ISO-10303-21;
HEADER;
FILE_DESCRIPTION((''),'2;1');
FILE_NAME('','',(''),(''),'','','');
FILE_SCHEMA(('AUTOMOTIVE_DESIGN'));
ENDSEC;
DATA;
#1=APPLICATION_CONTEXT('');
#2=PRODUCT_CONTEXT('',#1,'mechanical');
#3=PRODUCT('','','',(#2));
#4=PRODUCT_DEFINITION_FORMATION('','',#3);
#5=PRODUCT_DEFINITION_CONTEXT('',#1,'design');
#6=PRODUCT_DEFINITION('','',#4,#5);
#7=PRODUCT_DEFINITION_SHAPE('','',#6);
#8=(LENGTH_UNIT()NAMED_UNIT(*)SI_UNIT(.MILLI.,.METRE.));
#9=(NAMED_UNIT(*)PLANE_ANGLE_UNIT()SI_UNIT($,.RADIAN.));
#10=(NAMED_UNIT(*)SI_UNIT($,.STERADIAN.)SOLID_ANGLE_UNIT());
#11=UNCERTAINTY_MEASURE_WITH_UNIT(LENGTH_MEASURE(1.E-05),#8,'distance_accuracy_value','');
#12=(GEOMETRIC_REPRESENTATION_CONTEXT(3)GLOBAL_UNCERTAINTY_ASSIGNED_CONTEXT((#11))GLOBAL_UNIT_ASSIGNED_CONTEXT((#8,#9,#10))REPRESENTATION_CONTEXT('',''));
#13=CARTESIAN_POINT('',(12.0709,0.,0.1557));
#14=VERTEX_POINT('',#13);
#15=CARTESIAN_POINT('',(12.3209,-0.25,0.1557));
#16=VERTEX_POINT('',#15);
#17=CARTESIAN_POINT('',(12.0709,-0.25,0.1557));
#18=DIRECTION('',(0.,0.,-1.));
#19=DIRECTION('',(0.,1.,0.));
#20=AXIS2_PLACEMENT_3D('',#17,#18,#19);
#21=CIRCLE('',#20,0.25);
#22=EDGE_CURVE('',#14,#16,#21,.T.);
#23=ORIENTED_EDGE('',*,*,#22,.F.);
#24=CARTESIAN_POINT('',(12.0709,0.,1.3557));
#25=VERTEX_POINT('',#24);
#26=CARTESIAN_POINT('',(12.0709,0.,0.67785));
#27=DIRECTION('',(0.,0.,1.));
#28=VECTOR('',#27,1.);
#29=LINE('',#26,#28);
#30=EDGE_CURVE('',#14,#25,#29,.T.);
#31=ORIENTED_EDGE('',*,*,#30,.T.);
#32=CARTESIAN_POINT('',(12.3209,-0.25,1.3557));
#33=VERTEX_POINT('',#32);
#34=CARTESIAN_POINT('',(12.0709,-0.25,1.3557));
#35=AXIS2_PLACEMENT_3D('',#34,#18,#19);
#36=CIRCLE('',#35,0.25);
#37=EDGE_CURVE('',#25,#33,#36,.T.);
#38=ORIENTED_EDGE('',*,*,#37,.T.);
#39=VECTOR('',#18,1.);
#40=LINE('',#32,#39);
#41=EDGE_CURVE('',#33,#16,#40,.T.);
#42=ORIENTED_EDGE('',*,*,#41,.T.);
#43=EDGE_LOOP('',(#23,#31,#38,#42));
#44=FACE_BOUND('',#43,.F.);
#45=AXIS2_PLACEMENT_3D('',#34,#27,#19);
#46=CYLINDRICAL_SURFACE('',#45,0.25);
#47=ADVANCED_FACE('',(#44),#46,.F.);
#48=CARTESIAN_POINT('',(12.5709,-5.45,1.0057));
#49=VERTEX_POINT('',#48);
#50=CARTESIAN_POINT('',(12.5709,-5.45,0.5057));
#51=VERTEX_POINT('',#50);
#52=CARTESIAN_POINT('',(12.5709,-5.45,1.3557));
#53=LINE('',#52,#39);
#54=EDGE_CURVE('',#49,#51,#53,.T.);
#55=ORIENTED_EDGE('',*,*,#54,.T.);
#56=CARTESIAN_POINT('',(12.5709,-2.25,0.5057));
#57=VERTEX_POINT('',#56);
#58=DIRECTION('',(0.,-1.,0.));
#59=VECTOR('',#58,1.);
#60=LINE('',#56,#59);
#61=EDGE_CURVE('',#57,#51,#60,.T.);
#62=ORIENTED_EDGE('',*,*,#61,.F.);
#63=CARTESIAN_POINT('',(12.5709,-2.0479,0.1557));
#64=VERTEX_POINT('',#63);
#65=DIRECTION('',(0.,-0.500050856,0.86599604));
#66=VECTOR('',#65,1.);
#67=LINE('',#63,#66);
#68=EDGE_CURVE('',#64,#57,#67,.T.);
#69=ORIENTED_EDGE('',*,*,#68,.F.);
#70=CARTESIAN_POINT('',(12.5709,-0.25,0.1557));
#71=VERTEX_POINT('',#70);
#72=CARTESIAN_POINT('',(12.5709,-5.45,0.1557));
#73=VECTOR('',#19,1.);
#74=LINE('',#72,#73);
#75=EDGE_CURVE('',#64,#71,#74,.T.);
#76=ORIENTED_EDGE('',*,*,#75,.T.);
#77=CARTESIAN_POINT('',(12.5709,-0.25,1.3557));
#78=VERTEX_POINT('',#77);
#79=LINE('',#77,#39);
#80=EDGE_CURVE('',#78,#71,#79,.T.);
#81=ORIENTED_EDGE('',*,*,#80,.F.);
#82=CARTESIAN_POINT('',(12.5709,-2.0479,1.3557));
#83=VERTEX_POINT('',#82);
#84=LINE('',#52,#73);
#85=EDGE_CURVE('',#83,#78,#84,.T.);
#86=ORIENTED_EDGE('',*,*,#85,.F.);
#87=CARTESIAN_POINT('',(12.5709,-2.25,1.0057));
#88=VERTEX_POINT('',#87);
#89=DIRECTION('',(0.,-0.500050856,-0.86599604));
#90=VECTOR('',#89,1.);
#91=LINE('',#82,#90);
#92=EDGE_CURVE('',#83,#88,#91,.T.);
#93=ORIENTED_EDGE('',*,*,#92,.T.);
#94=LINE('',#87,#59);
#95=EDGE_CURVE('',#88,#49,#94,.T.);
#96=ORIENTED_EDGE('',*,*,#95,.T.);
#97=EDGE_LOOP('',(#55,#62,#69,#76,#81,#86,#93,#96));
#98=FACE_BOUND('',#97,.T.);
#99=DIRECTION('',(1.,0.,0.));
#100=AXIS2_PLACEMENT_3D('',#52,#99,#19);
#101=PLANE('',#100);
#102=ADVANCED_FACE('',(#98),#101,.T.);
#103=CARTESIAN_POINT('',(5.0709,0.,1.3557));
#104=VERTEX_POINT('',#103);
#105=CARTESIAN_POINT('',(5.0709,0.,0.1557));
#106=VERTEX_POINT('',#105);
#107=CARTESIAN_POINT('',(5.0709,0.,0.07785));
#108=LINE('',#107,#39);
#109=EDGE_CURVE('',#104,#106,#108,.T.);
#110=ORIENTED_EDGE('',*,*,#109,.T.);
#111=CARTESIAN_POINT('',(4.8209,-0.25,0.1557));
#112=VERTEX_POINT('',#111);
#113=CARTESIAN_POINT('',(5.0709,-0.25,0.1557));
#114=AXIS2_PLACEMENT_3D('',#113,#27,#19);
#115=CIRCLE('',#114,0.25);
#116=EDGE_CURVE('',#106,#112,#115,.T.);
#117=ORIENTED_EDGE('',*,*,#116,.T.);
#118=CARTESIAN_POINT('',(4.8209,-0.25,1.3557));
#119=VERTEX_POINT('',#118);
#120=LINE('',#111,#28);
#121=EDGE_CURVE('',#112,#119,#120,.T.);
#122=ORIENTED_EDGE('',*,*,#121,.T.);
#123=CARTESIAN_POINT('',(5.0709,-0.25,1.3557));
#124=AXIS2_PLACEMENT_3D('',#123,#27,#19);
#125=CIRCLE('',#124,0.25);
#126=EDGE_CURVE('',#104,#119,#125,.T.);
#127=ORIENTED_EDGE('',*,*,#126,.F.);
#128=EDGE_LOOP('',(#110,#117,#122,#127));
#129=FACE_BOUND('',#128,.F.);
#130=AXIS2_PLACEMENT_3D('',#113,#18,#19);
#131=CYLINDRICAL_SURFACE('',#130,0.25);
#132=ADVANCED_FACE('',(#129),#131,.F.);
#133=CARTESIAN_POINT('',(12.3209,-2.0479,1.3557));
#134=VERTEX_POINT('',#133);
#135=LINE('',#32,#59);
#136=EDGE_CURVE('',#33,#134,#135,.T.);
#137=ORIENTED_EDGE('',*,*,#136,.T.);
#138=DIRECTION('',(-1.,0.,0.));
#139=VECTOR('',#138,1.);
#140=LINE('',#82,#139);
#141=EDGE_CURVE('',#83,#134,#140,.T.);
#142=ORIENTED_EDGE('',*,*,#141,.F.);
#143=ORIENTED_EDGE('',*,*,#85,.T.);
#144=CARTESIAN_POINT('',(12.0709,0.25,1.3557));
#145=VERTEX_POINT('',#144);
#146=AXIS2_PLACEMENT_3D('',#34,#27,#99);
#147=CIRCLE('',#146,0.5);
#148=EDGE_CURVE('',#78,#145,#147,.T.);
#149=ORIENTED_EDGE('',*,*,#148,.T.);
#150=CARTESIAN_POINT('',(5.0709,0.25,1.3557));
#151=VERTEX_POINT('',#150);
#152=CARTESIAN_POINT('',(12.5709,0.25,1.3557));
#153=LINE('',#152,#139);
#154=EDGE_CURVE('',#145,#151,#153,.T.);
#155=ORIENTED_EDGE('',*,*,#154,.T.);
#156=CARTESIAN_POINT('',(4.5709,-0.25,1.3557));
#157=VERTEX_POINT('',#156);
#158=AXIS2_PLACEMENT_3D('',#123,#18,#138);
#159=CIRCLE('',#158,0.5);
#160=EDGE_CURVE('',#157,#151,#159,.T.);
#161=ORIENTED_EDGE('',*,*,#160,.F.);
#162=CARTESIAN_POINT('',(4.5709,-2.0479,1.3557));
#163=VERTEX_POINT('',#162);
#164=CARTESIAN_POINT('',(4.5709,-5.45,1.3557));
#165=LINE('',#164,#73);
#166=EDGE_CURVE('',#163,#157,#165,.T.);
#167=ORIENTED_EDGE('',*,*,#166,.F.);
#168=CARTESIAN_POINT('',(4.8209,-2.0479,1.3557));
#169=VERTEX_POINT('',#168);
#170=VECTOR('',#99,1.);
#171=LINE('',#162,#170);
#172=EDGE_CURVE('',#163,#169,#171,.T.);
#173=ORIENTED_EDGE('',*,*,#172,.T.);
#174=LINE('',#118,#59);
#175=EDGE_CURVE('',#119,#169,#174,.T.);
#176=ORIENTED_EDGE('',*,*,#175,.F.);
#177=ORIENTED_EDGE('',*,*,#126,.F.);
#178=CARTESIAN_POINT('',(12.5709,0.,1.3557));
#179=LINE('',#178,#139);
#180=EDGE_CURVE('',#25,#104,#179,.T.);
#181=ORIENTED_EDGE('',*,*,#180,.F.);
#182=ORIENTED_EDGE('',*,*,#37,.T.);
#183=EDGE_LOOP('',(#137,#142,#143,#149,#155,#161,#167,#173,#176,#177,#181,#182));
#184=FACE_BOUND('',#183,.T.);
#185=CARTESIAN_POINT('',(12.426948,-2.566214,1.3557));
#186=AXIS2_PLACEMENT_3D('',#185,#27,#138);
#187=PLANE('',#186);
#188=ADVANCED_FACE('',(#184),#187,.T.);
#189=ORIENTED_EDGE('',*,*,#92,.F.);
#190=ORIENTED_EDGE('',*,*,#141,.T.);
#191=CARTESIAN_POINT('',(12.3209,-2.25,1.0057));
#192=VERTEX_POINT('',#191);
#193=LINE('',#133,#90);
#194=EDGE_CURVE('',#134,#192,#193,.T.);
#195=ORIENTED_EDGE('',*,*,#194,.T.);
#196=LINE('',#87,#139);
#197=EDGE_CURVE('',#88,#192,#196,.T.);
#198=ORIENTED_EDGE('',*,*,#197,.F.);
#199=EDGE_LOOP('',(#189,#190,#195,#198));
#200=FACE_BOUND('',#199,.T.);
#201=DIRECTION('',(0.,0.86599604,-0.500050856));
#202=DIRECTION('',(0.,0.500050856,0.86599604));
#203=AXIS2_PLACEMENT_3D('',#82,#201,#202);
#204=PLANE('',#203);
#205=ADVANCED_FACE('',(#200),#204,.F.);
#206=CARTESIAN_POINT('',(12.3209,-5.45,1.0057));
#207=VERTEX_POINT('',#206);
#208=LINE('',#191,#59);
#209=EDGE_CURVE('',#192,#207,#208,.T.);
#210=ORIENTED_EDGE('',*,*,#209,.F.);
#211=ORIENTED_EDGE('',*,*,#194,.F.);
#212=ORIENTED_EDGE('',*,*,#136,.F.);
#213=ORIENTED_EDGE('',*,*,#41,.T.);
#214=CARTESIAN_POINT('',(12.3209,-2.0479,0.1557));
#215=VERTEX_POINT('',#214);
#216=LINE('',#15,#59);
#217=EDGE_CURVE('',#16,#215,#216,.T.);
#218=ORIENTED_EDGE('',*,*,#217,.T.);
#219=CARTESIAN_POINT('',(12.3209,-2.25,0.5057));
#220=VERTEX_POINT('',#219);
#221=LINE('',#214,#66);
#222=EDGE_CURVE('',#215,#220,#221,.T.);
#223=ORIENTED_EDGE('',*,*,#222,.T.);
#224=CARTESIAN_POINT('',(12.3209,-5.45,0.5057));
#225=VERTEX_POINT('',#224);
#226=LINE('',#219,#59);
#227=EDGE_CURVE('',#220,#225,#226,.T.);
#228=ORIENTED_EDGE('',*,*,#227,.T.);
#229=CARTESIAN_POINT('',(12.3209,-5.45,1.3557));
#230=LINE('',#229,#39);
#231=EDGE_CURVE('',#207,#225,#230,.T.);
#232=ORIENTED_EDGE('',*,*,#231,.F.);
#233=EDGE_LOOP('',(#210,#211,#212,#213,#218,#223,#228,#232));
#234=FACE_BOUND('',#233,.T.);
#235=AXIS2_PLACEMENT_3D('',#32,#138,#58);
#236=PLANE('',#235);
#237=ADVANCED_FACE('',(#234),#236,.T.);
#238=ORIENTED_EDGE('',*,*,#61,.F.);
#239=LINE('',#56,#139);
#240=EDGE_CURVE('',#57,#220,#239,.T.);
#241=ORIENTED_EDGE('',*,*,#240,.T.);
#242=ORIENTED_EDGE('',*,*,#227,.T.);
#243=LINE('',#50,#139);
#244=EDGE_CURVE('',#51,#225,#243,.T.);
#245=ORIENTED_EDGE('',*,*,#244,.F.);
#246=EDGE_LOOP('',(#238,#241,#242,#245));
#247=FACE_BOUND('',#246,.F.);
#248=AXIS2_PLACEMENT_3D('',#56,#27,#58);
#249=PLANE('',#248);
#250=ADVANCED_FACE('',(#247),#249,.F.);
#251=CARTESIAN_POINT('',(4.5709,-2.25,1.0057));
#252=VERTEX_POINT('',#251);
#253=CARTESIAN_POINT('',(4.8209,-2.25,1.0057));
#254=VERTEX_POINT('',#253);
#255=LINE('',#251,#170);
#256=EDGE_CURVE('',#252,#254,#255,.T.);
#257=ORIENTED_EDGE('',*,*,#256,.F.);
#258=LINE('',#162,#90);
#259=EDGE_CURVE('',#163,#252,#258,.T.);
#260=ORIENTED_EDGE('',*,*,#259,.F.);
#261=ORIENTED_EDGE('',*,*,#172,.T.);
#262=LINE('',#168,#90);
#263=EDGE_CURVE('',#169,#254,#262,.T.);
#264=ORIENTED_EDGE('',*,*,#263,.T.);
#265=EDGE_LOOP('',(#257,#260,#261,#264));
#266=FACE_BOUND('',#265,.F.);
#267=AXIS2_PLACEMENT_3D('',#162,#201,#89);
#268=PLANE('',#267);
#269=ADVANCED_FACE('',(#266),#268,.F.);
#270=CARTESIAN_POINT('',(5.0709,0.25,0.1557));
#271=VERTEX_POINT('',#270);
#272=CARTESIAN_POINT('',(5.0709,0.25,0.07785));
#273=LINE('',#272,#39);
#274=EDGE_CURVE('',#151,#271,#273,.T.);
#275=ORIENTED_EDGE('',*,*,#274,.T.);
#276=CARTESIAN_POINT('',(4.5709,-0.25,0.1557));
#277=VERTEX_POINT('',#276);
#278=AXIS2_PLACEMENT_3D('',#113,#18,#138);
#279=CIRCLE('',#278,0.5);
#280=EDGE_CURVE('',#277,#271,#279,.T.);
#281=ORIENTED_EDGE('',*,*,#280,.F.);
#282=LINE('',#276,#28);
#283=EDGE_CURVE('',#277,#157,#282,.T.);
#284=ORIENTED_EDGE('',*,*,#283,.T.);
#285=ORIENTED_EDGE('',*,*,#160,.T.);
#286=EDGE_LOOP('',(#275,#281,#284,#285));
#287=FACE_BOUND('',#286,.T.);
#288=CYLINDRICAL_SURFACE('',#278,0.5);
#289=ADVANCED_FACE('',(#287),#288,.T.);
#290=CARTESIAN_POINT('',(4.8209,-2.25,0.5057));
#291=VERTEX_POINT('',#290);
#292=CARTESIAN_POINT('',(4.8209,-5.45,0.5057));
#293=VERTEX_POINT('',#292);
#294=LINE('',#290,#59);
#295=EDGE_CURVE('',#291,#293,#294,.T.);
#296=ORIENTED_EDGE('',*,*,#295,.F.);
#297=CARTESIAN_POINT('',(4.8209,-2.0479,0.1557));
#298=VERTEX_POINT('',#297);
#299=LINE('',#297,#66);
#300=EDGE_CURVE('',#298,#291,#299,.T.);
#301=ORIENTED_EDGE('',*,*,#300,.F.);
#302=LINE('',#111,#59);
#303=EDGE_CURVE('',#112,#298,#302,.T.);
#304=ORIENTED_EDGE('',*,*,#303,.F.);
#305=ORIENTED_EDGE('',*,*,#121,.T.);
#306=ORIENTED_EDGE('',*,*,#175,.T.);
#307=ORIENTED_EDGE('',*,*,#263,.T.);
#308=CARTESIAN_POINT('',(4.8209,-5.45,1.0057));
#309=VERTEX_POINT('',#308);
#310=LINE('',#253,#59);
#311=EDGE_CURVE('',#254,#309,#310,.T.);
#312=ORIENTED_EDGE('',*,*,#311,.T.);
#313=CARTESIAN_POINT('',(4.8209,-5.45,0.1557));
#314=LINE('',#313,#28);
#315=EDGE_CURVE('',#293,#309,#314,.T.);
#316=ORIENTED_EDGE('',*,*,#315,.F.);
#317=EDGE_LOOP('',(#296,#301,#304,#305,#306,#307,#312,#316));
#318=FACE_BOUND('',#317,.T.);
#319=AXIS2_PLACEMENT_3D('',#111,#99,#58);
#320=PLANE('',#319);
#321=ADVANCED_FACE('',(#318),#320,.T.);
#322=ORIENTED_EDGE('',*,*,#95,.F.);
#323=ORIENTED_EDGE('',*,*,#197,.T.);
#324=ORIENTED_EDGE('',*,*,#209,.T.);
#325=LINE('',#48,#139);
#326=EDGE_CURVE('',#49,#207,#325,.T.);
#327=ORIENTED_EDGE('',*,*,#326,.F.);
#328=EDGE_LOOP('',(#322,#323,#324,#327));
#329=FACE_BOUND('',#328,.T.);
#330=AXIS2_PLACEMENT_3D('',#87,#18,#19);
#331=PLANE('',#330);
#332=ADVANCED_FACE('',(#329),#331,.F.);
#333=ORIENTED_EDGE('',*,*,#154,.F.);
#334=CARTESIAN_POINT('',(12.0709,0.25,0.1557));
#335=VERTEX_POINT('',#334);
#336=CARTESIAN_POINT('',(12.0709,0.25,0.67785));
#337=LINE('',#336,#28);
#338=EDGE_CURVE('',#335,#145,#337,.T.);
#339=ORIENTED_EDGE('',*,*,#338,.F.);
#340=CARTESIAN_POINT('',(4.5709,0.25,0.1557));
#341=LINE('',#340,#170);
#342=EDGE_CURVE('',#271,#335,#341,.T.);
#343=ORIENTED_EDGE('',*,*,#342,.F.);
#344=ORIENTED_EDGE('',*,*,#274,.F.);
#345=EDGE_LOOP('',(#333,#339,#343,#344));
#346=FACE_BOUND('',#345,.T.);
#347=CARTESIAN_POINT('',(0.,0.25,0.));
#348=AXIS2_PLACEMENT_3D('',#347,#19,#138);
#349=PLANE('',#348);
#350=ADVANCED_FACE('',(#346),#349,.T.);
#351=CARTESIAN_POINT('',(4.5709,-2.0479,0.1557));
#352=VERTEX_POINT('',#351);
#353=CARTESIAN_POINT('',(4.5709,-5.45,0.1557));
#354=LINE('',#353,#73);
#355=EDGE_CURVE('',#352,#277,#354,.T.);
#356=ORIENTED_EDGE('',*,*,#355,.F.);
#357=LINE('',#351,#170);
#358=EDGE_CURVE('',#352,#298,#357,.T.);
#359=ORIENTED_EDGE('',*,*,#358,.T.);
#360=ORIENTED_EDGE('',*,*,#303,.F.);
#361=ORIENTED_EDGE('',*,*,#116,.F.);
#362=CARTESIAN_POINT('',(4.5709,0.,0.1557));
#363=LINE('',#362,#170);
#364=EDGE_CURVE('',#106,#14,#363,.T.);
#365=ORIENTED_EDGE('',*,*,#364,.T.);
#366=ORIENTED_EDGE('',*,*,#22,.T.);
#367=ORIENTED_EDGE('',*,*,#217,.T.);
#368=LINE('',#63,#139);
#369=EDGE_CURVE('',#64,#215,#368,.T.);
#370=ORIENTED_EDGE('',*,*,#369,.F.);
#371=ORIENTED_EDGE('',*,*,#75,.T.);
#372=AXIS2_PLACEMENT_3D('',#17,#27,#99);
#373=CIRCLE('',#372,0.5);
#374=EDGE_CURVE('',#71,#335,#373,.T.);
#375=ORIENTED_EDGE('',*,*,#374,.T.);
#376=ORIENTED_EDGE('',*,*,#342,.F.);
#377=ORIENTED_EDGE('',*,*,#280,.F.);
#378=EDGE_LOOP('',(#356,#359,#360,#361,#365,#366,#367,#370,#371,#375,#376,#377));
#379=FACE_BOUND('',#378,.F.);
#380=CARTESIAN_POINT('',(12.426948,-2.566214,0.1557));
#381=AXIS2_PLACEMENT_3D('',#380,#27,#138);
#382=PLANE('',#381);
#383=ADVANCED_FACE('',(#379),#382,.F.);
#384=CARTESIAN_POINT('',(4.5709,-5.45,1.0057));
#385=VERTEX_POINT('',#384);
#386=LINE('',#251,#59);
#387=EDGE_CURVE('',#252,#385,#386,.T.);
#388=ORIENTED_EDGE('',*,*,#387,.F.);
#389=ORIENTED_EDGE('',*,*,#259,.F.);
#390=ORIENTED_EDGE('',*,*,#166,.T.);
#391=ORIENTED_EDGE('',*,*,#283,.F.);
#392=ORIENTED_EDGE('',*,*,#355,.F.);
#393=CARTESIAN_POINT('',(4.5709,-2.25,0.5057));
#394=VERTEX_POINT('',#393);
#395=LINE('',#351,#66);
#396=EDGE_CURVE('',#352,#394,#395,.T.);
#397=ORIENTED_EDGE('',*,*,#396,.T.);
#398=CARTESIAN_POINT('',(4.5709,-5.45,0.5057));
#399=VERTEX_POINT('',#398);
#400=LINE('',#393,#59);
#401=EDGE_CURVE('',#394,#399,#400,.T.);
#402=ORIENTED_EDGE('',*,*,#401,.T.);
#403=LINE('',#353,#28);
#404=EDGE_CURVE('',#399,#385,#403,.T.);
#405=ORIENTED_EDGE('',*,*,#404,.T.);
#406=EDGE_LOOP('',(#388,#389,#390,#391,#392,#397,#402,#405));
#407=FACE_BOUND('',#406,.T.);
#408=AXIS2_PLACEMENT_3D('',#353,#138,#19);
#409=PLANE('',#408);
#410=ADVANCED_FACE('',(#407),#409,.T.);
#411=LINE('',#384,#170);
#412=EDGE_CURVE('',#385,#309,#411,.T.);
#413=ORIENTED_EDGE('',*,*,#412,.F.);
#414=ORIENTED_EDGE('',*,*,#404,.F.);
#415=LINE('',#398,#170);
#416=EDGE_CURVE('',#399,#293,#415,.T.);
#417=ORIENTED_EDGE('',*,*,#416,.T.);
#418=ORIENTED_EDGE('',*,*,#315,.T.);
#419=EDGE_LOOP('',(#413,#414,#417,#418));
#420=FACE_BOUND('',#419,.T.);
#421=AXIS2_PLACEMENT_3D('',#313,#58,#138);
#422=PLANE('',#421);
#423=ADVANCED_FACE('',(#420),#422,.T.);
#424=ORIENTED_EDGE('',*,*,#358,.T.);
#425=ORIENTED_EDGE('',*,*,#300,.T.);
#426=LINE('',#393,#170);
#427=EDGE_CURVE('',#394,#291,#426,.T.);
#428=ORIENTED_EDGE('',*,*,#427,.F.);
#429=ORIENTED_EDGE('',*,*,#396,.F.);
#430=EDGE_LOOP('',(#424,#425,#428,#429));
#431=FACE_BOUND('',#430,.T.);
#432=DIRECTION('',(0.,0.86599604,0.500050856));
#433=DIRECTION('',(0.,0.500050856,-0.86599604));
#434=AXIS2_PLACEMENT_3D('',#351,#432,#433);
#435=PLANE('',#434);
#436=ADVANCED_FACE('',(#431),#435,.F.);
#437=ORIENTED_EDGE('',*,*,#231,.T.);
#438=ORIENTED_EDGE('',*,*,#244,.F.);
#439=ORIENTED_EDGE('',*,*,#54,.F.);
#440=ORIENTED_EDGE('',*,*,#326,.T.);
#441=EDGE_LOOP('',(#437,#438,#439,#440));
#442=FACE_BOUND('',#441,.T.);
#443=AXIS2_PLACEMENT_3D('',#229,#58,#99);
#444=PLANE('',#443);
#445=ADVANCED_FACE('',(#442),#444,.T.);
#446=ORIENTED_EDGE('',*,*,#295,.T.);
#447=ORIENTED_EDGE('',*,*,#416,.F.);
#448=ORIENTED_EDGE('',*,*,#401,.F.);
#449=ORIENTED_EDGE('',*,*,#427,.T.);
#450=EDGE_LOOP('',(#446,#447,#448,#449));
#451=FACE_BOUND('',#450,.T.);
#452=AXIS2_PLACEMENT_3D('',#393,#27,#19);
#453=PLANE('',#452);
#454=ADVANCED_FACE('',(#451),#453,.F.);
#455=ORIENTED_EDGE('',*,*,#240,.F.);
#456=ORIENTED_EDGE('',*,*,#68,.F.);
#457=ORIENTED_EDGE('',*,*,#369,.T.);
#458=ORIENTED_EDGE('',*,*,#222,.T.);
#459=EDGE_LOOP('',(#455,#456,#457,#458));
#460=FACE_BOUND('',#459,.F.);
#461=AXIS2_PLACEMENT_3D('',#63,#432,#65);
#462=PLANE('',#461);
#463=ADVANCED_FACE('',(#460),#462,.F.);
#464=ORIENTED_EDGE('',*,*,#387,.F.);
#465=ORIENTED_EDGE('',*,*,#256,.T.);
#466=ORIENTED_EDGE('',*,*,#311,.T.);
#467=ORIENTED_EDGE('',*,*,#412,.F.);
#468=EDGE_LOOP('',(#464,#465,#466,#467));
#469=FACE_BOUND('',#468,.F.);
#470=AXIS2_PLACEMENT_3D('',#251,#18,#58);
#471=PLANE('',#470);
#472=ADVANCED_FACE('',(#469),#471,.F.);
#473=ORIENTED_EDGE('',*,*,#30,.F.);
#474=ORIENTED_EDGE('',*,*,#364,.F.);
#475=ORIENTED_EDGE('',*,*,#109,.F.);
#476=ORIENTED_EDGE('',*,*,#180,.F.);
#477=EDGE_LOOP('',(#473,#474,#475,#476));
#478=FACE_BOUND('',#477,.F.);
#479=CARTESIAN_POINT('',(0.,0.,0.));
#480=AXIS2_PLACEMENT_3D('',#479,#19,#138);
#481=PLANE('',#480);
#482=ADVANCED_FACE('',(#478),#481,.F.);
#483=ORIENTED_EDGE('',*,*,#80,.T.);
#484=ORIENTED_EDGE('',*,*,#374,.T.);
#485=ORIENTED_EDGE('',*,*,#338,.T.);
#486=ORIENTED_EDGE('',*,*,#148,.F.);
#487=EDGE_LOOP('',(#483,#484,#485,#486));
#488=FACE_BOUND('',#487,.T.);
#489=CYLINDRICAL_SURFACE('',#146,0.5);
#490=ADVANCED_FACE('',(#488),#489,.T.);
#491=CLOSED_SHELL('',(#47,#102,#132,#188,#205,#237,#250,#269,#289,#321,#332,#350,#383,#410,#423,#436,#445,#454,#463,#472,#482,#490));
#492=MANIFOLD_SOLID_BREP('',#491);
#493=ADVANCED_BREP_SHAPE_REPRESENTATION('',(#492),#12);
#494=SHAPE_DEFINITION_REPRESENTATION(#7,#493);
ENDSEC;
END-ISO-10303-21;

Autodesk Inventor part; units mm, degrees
ref_plane "YZ Plane" through (0, 0, 0) normal (1, 0, 0) x (0, 1, 0)
ref_plane "XZ Plane" through (0, 0, 0) normal (0, 1, 0) x (-1, 0, 0)
ref_plane "XY Plane" through (0, 0, 0) normal (0, 0, 1) x (1, 0, 0)
sketch "Sketch1" plane through (0, 0, 0) normal (0, 1, 0) x (-1, 0, 0)
  line L0 (-4.5709, 0.1557) -> (-12.5709, 0.1557)
  line L1 (-12.5709, 0.1557) -> (-12.5709, 1.3557)
  line L2 (-12.5709, 1.3557) -> (-4.5709, 1.3557)
  line L3 (-4.5709, 1.3557) -> (-4.5709, 0.1557)
  dimension "d27" = 8
  dimension "d28" = 1.3
extrude "Plate4" add sketch "Sketch1" along normal blind 0.25
sketch "Sketch5" plane through (12.3209, 0.25, 1.3557) normal (1, 0, 0) x (0, 1, 0)
  line L0 (0, -1.2) -> (0, 0)
  line L1 (0, 0) -> (-5.7, 0)
  line L2 (-5.7, 0) -> (-5.7, -1.2)
  line L3 (-5.7, -1.2) -> (0, -1.2)
edge flange "Flange4" height 5.7 angle 90 thickness 0.25 bend radius 0.25 thickness toward (1, 0, 0) relief tear relief width 0.25 relief depth 0.125 corner gap 0.25 corner form 0 edges at (12.5709, 0, 0.7557) (4.5709, 0, 0.7557) wall of the first edge with corners at (12.3209, 0.25, 0.1557) (12.3209, 0.25, 1.3557) (12.3209, -5.45, 1.3557) (12.3209, -5.45, 0.1557)
bend "Bend4"
corner "Corner4"
sketch "Sketch6" plane through (12.5709, -5.45, 1.3557) normal (1, 0, 0) x (0, 0, -1)
  line L0 (1.2, 0) -> (0, 0) projected
  line L1 (0.6, 0) -> (0.6, 5.2) construction
  line L2 (1.2, 5.2) -> (0, 5.2) projected
  line L3 (1.2, 3.4021) -> (0.85, 3.2)
  line L4 (0.85, 3.2) -> (0.85, 0)
  line L5 (1.2, 0) -> (0.85, 0)
  line L6 (1.2, 5.2) -> (1.2, 0) projected
  line L7 (1.2, 3.4021) -> (1.2, 0)
  line L8 (0, 5.7) -> (1.2, 5.7) projected
  point P0 (1.3557, 5.45)
  dimension "d52" = 3.2
  dimension "d54" = 0.25
  dimension "d56" = 2.5
extrude "Cut1" cut sketch "Sketch6" against normal blind 0.25
ref_plane "Work Plane1" through (12.5709, -0.25, 0.7557) normal (0, 0, -1) x (-1, 0, 0)
ref_plane "Work Plane2" through (8.5709, -5.45, 1.3557) normal (1, 0, 0) x (0, 0, -1)
mirror "Mirror1" about plane through (12.5709, -0.25, 0.7557) normal (0, 0, -1) of "Cut1"
mirror "Mirror2" about plane through (8.5709, -5.45, 1.3557) normal (1, 0, 0) of "Cut1"
mirror "Mirror3" about plane through (8.5709, -5.45, 1.3557) normal (1, 0, 0) of "Cut1", "Mirror1"
equation "\"d27\" = atmegaPinBaseWidth"
equation "\"d28\" = atmegaPinWidth1"
equation "\"d52\" = atmegaSeatingPlaneDistance"
equation "\"d54\" = 0.5 * atmegaPinWidth2"
equation "\"d50\" = Thickness"
equation "\"d29\" = Thickness"
equation "\"d40\" = BendReliefWidth"
equation "\"d41\" = BendReliefDepth"
equation "\"d42\" = MinimumRemnant"
equation "\"d43\" = TransitionRadius"
equation "\"d44\" = atmegaPinLenght"
equation "\"d46\" = BendRadius"
equation "\"d47\" = CornerReliefSize"
equation "\"d48\" = GapSize"
equation "\"d49\" = JacobiRadiusSize"
equation "\"BendRadius\" = Thickness"
equation "\"BendReliefWidth\" = Thickness"
equation "\"BendReliefDepth\" = 0.5 * Thickness"
equation "\"CornerReliefSize\" = 4 * Thickness"
equation "\"MinimumRemnant\" = 2 * Thickness"
equation "\"TransitionRadius\" = BendRadius"
equation "\"JacobiRadiusSize\" = BendRadius"
equation "\"GapSize\" = Thickness"
equation "\"atmegaPinThickness\" = 0.3"
equation "\"atmegaPinWidth1\" = 1.3"
equation "\"atmegaPinWidth2\" = 0.5"
equation "\"atmegaEndPinWidth\" = 0.9"
equation "\"atmegaPinBendAngle\" = 80deg"
equation "\"atmegaPinBaseWidth\" = 8"
equation "\"atmegaSeatingPlaneDistance\" = 3.2"
equation "\"Thickness\" = 0.25"
equation "\"atmegaPinLenght\" = 5.7"
properties part number "atmega_pin"
